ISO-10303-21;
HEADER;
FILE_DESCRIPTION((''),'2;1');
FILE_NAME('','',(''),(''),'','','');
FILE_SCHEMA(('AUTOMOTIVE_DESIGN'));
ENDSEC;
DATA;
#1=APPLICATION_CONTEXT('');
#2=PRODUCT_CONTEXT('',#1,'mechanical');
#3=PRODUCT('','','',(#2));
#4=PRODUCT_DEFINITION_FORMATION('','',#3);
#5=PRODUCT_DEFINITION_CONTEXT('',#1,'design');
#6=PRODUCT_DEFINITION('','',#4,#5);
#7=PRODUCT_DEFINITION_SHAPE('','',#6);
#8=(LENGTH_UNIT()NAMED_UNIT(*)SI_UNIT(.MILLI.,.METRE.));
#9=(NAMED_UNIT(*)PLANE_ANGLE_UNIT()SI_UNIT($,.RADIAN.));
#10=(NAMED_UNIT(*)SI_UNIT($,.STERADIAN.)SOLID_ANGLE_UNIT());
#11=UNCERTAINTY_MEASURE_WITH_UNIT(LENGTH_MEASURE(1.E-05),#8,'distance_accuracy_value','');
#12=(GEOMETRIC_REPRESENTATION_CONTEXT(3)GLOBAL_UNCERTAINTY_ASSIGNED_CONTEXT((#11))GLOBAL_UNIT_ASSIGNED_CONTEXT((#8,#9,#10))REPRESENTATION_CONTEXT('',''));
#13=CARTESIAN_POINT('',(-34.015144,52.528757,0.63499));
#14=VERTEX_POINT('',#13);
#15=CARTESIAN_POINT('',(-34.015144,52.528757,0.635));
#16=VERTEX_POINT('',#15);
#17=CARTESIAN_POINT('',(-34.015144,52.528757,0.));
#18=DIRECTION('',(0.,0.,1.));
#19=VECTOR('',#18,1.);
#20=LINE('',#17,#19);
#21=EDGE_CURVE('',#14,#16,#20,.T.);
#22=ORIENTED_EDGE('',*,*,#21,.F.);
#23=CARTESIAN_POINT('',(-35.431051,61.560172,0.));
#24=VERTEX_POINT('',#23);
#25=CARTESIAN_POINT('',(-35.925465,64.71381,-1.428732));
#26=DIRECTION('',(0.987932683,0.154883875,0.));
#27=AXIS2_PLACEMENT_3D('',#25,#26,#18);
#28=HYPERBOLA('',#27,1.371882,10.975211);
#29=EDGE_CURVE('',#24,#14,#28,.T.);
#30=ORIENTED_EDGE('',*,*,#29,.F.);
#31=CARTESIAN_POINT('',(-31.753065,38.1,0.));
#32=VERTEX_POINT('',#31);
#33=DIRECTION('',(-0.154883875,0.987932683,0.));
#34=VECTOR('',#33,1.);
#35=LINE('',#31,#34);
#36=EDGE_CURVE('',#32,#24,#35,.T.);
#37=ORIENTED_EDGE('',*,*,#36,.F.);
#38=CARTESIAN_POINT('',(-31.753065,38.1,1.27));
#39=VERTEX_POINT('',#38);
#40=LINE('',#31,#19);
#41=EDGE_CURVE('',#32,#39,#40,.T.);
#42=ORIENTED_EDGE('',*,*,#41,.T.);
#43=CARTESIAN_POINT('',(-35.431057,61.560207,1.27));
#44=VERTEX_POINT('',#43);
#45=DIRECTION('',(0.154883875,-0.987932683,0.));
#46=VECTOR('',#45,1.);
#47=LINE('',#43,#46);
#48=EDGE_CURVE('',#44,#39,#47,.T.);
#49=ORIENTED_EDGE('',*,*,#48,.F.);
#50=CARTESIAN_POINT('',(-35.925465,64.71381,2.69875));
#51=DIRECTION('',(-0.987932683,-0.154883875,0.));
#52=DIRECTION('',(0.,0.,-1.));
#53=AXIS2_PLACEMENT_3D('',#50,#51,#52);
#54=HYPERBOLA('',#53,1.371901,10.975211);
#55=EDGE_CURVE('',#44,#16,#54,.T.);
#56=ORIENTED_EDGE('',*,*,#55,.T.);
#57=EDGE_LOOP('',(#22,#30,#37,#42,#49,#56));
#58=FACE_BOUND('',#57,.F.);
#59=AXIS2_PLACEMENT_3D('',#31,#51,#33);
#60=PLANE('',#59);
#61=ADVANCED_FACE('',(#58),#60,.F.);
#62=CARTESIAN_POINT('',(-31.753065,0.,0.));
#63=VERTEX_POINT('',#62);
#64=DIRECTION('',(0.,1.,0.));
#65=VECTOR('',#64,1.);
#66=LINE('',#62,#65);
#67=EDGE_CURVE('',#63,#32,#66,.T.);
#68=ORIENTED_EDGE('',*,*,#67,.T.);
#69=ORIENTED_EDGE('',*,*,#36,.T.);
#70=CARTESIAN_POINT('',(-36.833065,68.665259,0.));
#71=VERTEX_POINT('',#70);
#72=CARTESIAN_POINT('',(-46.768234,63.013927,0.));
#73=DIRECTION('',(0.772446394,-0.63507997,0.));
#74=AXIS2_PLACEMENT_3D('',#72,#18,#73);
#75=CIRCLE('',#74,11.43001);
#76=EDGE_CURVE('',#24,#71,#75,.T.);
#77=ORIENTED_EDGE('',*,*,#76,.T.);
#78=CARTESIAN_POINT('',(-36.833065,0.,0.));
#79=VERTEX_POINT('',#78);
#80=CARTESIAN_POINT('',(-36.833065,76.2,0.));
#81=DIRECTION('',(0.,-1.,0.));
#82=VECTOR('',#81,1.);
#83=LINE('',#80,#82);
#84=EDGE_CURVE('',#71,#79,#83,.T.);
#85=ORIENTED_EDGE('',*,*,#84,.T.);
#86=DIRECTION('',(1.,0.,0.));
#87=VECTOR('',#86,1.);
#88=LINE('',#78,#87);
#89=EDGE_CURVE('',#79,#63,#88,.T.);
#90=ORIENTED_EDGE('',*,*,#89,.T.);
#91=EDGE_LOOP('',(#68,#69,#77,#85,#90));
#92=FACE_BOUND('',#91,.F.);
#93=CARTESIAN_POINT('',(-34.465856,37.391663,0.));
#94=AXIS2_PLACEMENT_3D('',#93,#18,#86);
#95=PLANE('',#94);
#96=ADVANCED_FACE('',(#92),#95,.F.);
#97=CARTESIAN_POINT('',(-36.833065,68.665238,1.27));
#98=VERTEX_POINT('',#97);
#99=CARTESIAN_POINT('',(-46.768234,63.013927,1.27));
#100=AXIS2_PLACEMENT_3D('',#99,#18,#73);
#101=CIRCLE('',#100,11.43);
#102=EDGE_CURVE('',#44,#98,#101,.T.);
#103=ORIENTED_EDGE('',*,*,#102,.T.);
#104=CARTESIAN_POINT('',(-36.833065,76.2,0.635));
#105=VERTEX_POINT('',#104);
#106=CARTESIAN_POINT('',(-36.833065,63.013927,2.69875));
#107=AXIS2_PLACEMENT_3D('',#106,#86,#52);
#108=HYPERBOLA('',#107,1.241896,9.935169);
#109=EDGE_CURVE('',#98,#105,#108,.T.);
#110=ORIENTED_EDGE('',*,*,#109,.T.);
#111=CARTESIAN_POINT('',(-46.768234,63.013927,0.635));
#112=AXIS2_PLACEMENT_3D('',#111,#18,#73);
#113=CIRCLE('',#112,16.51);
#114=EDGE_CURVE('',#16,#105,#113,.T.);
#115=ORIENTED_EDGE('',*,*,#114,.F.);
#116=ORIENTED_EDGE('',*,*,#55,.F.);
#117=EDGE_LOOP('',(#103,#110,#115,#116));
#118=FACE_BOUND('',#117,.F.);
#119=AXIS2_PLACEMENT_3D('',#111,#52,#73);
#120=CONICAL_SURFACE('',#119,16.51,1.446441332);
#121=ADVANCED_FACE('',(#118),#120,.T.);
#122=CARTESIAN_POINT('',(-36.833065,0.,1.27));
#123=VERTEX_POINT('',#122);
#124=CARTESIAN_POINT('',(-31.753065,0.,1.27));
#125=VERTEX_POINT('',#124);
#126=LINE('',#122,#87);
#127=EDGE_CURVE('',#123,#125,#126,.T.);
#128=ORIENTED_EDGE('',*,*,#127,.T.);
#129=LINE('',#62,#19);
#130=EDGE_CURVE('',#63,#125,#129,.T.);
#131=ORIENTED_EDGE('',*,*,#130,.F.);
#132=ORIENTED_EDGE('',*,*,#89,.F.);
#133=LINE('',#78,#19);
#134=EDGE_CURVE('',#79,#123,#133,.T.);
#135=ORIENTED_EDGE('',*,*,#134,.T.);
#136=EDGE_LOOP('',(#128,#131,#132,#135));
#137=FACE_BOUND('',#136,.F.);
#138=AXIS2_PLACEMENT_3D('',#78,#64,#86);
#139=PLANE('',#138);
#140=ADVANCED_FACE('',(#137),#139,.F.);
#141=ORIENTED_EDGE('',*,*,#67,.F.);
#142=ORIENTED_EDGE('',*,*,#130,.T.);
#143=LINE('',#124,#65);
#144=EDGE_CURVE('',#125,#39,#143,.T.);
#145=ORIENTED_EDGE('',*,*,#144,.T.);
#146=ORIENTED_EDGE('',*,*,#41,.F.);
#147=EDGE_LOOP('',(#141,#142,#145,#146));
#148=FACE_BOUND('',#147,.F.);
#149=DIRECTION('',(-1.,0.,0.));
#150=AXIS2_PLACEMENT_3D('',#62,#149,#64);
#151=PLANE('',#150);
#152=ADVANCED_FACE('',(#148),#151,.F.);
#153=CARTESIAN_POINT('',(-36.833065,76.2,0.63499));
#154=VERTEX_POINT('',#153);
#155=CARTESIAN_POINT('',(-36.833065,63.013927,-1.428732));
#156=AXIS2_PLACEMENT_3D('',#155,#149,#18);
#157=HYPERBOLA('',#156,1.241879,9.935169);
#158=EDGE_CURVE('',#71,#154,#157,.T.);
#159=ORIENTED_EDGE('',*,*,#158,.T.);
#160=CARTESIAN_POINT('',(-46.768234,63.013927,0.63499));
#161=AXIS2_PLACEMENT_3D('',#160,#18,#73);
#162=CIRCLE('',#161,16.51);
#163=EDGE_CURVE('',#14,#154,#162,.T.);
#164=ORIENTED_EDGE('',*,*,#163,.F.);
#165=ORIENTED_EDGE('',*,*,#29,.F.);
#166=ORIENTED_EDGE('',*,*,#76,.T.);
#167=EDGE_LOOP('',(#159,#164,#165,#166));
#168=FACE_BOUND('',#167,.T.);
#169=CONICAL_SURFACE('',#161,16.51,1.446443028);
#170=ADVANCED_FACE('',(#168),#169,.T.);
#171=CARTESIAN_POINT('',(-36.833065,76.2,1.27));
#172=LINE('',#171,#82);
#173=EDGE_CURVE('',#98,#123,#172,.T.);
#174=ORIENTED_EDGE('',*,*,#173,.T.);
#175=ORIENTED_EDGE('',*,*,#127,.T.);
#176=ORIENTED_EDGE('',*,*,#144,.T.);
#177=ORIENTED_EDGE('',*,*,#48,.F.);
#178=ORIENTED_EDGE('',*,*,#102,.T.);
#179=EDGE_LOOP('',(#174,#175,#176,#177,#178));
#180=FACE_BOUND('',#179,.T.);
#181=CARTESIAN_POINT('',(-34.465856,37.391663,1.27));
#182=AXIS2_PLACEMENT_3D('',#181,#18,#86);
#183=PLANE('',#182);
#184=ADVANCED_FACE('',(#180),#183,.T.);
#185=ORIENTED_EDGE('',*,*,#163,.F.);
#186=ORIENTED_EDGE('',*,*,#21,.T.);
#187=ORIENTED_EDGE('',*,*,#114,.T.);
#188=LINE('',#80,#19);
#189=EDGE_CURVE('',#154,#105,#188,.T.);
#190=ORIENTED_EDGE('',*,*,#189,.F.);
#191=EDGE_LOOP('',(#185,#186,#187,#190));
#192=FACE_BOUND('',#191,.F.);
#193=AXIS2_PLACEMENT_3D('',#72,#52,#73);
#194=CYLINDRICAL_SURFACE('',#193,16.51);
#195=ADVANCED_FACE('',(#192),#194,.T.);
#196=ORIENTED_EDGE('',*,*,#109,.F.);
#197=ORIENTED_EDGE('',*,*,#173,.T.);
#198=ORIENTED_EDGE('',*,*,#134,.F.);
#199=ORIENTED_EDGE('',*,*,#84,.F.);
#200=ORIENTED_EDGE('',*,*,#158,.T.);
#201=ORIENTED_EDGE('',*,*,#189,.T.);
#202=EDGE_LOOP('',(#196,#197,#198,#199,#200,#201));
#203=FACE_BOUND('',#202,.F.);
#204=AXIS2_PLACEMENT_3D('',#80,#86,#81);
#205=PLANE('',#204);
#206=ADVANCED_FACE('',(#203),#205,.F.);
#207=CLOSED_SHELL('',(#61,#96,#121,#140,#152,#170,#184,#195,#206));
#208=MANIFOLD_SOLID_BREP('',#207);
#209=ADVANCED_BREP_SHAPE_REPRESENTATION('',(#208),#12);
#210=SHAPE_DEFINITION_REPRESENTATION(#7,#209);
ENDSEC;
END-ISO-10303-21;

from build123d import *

# Parameters (mm, degrees)
F1_DEPTH   = 1.27
F2_SIZE2   = 0.635
F2_SIZE    = 5.08
F2_2_SIZE2 = 0.63499
F2_2_SIZE  = 5.07999


# Not quite as in the source:
# - a fillet or chamfer is up to 0.001 mm smaller than in the source, because OpenCascade refuses the exact size


with BuildPart() as f1:
    # F0 (on Top) → F1 (new body)
    with BuildSketch(Plane.XY):
        with BuildLine():
            Line((-36.8330654015, 25.4), (-36.8330654015, 0))
            Line((-36.8330654015, 0), (-31.7530654015, 0))
            Line((-31.7530654015, 0), (-31.7530654015, 25.4))
            Line((-31.7530654015, 25.4), (-31.7530654015, 38.1))
            Line((-31.7530654015, 38.1), (-34.0151443949, 52.5287568289))
            ThreePointArc((-34.0151443949, 52.5287568289), (-30.3739911163, 64.9655644869), (-36.8330654015, 76.2))
            Line((-36.8330654015, 76.2), (-36.8330654015, 25.4))
        make_face()
    extrude(amount=F1_DEPTH)

    # F2
    f2_edges = [f1.edges().sort_by_distance(p)[0] for p in [
        (-30.373991, 64.965564, 1.27),
    ]]
    f2_side = f1.faces().sort_by_distance((-34.308504, 37.141649, 1.27))[0]
    chamfer(f2_edges, length=F2_SIZE, length2=F2_SIZE2, reference=f2_side)

    # F2#2 (size 5.08 and 0.635 in the source; OpenCascade refuses exactly that, so slightly less here)
    f2_2_edges = [f1.edges().sort_by_distance(p)[0] for p in [
        (-30.373991, 64.965564, 0),
    ]]
    f2_2_side = f1.faces().sort_by_distance((-34.308504, 37.141649, 0))[0]
    chamfer(f2_2_edges, length=F2_2_SIZE, length2=F2_2_SIZE2, reference=f2_2_side)


solid = f1.part
